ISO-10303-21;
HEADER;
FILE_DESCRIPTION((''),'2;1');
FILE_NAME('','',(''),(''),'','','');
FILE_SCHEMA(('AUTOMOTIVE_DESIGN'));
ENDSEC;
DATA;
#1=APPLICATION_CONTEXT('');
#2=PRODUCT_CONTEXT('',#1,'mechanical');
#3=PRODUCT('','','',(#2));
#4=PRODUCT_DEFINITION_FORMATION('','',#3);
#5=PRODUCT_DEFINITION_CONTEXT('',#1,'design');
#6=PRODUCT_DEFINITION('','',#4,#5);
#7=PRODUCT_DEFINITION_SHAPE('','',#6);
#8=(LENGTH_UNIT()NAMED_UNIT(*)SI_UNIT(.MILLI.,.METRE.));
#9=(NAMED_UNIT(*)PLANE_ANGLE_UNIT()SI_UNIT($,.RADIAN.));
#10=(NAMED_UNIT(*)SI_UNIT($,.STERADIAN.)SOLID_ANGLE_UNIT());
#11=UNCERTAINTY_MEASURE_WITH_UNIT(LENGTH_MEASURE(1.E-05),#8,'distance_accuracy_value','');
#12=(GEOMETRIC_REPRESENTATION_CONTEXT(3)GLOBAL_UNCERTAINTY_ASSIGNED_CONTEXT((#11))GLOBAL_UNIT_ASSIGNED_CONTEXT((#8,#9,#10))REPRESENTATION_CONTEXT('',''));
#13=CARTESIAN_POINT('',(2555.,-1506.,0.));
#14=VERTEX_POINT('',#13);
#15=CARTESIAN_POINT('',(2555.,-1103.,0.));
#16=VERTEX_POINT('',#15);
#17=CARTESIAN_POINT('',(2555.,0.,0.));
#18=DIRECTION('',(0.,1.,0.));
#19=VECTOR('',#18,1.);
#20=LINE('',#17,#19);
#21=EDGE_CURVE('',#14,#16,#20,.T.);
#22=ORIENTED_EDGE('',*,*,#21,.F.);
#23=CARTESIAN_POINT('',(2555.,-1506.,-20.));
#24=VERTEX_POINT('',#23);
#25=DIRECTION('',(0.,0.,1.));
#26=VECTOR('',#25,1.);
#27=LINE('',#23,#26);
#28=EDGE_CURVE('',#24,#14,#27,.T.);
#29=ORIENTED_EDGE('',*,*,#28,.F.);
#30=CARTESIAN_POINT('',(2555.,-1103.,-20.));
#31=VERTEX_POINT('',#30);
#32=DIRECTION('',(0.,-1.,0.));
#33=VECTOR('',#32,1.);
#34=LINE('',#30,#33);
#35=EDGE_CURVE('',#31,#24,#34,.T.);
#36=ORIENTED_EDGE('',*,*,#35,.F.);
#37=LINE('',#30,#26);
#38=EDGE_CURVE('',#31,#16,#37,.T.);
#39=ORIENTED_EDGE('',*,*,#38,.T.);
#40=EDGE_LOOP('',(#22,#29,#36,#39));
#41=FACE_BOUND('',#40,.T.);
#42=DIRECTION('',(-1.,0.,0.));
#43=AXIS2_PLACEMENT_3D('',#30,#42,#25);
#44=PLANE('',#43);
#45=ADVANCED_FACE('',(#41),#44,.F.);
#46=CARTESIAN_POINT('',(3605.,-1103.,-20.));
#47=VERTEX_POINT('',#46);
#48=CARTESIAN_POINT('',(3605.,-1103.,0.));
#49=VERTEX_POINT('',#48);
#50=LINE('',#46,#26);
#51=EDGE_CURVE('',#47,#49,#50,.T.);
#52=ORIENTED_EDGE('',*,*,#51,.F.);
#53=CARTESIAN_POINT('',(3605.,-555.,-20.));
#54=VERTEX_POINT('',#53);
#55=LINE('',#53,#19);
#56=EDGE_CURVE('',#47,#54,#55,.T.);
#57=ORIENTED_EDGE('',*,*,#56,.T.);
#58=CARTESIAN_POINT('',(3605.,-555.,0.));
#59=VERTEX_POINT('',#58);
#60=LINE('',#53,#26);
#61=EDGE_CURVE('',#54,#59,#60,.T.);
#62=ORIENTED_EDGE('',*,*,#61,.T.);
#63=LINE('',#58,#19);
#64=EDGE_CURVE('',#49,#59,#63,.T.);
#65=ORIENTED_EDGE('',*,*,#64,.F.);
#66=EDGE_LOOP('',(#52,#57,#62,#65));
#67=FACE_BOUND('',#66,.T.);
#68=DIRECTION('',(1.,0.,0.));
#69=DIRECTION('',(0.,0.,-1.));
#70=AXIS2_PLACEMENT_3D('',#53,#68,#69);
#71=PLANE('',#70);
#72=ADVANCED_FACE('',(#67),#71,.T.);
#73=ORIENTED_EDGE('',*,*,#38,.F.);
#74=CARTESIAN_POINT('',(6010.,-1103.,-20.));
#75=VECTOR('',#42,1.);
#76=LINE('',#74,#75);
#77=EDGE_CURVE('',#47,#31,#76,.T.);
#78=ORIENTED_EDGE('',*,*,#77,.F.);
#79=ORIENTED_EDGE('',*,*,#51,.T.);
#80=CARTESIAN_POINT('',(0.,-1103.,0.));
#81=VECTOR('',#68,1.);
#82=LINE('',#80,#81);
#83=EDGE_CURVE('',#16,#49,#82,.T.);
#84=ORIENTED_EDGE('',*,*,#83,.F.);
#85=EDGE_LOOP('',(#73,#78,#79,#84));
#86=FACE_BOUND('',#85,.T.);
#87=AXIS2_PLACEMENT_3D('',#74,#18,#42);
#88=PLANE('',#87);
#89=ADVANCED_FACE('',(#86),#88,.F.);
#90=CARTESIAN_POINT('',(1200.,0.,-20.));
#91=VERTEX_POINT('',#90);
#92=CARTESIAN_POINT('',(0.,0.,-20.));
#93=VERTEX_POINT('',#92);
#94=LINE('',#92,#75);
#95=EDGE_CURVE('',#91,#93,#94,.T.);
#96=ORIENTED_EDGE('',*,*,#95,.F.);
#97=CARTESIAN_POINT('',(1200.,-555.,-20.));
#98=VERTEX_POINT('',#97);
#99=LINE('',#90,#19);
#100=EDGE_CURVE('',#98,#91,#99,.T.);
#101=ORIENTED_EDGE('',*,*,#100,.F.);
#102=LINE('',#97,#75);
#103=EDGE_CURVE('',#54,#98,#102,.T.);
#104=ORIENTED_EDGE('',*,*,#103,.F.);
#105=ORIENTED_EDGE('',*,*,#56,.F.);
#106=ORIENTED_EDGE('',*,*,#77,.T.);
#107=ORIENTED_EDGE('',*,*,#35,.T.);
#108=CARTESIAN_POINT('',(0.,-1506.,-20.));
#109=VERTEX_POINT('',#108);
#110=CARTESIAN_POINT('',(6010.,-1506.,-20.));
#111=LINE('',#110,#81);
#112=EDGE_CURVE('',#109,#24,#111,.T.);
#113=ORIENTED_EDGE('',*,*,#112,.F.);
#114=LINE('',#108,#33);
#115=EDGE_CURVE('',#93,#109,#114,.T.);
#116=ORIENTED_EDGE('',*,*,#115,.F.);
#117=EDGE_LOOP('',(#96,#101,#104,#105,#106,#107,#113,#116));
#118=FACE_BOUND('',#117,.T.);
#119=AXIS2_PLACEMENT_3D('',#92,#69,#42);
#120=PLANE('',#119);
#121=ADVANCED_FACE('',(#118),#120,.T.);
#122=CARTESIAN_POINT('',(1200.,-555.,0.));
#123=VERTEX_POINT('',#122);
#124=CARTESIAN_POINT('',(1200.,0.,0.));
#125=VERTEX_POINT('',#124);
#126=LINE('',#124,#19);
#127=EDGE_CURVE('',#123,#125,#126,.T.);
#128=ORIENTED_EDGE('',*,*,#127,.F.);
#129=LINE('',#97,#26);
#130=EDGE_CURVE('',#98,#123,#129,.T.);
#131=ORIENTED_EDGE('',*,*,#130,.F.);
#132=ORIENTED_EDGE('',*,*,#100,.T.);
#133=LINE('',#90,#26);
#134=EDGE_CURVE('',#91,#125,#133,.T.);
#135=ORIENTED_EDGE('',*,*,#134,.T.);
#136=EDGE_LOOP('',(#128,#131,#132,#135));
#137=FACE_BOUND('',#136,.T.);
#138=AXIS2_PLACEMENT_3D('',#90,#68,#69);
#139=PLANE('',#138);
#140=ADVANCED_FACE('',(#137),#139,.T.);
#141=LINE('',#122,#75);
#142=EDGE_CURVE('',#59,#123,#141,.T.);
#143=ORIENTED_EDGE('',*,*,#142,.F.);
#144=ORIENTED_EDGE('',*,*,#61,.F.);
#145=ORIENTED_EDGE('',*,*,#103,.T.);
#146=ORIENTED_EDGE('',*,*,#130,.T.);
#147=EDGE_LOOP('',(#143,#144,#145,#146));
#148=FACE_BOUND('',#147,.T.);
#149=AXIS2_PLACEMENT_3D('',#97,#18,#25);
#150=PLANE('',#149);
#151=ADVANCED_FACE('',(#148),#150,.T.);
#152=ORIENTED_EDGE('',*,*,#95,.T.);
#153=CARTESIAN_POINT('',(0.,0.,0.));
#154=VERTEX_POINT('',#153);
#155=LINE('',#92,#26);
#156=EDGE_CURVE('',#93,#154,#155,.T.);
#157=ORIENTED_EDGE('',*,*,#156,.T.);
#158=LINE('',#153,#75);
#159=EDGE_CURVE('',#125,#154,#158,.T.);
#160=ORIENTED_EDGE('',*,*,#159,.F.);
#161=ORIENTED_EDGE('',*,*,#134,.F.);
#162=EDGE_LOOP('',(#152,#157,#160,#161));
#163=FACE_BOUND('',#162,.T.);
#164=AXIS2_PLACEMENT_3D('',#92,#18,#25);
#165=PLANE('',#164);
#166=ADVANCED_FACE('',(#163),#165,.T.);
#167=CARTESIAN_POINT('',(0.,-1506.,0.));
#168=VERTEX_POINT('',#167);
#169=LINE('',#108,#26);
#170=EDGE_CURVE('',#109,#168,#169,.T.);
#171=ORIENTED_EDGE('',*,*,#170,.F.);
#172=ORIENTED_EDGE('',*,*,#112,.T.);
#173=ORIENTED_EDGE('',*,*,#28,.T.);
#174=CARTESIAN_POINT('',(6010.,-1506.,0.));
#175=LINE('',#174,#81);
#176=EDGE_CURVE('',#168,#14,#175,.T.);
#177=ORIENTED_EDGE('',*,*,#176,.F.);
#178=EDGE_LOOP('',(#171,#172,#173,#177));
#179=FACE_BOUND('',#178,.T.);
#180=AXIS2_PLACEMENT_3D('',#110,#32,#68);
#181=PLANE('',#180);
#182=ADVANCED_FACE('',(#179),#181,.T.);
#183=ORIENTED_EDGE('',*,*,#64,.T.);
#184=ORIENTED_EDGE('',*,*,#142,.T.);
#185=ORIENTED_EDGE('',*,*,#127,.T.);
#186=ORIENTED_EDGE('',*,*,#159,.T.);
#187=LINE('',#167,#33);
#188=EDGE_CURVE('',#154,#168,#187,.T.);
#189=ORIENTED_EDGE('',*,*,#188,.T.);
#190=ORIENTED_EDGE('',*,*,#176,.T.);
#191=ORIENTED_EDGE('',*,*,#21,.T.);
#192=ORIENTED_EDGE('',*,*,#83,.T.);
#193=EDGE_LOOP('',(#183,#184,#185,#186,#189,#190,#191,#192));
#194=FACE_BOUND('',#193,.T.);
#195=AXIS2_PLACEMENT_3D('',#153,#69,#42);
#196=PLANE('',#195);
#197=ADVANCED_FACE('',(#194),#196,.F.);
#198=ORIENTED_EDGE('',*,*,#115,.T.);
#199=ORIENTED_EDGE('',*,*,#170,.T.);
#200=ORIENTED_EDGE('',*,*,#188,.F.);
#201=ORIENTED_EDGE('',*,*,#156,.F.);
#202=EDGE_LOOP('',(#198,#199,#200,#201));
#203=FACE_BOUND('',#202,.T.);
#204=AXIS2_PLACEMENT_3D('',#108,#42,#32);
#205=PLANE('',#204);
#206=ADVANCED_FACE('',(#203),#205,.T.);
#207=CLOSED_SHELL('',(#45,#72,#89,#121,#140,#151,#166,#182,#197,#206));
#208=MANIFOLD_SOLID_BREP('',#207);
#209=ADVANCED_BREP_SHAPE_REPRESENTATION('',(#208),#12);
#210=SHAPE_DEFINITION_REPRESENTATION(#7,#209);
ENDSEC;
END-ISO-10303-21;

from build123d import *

# Parameters (mm, degrees)
TABAN_FLAN_1_DEPTH         = 20
KES_EKSTR_ZYON1_DEPTH      = 6196.848287361
KES_EKSTR_ZYON1_DEPTH_BACK = 6196.848287361
IZIM2_W                    = 3455
IZIM2_H                    = 403


# Sheet-metal steps are written as plain solids
with BuildPart() as part:
    # Çizim1 → Taban-Flanş1 (new body)
    with BuildSketch(Plane.XY):
        Polygon((0, 0), (1200, 0), (1200, -555), (3605, -555), (3605, -1103), (6010, -1103), (6010, -1506), (0, -1506), align=None)
    extrude(amount=-TABAN_FLAN_1_DEPTH)

    # Çizim2 → Kes-Ekstrüzyon1 (cut, two sides: drawn at the far end of the back side and taken through both)
    with BuildSketch(Plane.XY.offset(-KES_EKSTR_ZYON1_DEPTH_BACK)):
        with Locations((4282.5, -1304.5)):
            Rectangle(IZIM2_W, IZIM2_H)
    extrude(amount=KES_EKSTR_ZYON1_DEPTH + KES_EKSTR_ZYON1_DEPTH_BACK, mode=Mode.SUBTRACT)


solid = part.part
